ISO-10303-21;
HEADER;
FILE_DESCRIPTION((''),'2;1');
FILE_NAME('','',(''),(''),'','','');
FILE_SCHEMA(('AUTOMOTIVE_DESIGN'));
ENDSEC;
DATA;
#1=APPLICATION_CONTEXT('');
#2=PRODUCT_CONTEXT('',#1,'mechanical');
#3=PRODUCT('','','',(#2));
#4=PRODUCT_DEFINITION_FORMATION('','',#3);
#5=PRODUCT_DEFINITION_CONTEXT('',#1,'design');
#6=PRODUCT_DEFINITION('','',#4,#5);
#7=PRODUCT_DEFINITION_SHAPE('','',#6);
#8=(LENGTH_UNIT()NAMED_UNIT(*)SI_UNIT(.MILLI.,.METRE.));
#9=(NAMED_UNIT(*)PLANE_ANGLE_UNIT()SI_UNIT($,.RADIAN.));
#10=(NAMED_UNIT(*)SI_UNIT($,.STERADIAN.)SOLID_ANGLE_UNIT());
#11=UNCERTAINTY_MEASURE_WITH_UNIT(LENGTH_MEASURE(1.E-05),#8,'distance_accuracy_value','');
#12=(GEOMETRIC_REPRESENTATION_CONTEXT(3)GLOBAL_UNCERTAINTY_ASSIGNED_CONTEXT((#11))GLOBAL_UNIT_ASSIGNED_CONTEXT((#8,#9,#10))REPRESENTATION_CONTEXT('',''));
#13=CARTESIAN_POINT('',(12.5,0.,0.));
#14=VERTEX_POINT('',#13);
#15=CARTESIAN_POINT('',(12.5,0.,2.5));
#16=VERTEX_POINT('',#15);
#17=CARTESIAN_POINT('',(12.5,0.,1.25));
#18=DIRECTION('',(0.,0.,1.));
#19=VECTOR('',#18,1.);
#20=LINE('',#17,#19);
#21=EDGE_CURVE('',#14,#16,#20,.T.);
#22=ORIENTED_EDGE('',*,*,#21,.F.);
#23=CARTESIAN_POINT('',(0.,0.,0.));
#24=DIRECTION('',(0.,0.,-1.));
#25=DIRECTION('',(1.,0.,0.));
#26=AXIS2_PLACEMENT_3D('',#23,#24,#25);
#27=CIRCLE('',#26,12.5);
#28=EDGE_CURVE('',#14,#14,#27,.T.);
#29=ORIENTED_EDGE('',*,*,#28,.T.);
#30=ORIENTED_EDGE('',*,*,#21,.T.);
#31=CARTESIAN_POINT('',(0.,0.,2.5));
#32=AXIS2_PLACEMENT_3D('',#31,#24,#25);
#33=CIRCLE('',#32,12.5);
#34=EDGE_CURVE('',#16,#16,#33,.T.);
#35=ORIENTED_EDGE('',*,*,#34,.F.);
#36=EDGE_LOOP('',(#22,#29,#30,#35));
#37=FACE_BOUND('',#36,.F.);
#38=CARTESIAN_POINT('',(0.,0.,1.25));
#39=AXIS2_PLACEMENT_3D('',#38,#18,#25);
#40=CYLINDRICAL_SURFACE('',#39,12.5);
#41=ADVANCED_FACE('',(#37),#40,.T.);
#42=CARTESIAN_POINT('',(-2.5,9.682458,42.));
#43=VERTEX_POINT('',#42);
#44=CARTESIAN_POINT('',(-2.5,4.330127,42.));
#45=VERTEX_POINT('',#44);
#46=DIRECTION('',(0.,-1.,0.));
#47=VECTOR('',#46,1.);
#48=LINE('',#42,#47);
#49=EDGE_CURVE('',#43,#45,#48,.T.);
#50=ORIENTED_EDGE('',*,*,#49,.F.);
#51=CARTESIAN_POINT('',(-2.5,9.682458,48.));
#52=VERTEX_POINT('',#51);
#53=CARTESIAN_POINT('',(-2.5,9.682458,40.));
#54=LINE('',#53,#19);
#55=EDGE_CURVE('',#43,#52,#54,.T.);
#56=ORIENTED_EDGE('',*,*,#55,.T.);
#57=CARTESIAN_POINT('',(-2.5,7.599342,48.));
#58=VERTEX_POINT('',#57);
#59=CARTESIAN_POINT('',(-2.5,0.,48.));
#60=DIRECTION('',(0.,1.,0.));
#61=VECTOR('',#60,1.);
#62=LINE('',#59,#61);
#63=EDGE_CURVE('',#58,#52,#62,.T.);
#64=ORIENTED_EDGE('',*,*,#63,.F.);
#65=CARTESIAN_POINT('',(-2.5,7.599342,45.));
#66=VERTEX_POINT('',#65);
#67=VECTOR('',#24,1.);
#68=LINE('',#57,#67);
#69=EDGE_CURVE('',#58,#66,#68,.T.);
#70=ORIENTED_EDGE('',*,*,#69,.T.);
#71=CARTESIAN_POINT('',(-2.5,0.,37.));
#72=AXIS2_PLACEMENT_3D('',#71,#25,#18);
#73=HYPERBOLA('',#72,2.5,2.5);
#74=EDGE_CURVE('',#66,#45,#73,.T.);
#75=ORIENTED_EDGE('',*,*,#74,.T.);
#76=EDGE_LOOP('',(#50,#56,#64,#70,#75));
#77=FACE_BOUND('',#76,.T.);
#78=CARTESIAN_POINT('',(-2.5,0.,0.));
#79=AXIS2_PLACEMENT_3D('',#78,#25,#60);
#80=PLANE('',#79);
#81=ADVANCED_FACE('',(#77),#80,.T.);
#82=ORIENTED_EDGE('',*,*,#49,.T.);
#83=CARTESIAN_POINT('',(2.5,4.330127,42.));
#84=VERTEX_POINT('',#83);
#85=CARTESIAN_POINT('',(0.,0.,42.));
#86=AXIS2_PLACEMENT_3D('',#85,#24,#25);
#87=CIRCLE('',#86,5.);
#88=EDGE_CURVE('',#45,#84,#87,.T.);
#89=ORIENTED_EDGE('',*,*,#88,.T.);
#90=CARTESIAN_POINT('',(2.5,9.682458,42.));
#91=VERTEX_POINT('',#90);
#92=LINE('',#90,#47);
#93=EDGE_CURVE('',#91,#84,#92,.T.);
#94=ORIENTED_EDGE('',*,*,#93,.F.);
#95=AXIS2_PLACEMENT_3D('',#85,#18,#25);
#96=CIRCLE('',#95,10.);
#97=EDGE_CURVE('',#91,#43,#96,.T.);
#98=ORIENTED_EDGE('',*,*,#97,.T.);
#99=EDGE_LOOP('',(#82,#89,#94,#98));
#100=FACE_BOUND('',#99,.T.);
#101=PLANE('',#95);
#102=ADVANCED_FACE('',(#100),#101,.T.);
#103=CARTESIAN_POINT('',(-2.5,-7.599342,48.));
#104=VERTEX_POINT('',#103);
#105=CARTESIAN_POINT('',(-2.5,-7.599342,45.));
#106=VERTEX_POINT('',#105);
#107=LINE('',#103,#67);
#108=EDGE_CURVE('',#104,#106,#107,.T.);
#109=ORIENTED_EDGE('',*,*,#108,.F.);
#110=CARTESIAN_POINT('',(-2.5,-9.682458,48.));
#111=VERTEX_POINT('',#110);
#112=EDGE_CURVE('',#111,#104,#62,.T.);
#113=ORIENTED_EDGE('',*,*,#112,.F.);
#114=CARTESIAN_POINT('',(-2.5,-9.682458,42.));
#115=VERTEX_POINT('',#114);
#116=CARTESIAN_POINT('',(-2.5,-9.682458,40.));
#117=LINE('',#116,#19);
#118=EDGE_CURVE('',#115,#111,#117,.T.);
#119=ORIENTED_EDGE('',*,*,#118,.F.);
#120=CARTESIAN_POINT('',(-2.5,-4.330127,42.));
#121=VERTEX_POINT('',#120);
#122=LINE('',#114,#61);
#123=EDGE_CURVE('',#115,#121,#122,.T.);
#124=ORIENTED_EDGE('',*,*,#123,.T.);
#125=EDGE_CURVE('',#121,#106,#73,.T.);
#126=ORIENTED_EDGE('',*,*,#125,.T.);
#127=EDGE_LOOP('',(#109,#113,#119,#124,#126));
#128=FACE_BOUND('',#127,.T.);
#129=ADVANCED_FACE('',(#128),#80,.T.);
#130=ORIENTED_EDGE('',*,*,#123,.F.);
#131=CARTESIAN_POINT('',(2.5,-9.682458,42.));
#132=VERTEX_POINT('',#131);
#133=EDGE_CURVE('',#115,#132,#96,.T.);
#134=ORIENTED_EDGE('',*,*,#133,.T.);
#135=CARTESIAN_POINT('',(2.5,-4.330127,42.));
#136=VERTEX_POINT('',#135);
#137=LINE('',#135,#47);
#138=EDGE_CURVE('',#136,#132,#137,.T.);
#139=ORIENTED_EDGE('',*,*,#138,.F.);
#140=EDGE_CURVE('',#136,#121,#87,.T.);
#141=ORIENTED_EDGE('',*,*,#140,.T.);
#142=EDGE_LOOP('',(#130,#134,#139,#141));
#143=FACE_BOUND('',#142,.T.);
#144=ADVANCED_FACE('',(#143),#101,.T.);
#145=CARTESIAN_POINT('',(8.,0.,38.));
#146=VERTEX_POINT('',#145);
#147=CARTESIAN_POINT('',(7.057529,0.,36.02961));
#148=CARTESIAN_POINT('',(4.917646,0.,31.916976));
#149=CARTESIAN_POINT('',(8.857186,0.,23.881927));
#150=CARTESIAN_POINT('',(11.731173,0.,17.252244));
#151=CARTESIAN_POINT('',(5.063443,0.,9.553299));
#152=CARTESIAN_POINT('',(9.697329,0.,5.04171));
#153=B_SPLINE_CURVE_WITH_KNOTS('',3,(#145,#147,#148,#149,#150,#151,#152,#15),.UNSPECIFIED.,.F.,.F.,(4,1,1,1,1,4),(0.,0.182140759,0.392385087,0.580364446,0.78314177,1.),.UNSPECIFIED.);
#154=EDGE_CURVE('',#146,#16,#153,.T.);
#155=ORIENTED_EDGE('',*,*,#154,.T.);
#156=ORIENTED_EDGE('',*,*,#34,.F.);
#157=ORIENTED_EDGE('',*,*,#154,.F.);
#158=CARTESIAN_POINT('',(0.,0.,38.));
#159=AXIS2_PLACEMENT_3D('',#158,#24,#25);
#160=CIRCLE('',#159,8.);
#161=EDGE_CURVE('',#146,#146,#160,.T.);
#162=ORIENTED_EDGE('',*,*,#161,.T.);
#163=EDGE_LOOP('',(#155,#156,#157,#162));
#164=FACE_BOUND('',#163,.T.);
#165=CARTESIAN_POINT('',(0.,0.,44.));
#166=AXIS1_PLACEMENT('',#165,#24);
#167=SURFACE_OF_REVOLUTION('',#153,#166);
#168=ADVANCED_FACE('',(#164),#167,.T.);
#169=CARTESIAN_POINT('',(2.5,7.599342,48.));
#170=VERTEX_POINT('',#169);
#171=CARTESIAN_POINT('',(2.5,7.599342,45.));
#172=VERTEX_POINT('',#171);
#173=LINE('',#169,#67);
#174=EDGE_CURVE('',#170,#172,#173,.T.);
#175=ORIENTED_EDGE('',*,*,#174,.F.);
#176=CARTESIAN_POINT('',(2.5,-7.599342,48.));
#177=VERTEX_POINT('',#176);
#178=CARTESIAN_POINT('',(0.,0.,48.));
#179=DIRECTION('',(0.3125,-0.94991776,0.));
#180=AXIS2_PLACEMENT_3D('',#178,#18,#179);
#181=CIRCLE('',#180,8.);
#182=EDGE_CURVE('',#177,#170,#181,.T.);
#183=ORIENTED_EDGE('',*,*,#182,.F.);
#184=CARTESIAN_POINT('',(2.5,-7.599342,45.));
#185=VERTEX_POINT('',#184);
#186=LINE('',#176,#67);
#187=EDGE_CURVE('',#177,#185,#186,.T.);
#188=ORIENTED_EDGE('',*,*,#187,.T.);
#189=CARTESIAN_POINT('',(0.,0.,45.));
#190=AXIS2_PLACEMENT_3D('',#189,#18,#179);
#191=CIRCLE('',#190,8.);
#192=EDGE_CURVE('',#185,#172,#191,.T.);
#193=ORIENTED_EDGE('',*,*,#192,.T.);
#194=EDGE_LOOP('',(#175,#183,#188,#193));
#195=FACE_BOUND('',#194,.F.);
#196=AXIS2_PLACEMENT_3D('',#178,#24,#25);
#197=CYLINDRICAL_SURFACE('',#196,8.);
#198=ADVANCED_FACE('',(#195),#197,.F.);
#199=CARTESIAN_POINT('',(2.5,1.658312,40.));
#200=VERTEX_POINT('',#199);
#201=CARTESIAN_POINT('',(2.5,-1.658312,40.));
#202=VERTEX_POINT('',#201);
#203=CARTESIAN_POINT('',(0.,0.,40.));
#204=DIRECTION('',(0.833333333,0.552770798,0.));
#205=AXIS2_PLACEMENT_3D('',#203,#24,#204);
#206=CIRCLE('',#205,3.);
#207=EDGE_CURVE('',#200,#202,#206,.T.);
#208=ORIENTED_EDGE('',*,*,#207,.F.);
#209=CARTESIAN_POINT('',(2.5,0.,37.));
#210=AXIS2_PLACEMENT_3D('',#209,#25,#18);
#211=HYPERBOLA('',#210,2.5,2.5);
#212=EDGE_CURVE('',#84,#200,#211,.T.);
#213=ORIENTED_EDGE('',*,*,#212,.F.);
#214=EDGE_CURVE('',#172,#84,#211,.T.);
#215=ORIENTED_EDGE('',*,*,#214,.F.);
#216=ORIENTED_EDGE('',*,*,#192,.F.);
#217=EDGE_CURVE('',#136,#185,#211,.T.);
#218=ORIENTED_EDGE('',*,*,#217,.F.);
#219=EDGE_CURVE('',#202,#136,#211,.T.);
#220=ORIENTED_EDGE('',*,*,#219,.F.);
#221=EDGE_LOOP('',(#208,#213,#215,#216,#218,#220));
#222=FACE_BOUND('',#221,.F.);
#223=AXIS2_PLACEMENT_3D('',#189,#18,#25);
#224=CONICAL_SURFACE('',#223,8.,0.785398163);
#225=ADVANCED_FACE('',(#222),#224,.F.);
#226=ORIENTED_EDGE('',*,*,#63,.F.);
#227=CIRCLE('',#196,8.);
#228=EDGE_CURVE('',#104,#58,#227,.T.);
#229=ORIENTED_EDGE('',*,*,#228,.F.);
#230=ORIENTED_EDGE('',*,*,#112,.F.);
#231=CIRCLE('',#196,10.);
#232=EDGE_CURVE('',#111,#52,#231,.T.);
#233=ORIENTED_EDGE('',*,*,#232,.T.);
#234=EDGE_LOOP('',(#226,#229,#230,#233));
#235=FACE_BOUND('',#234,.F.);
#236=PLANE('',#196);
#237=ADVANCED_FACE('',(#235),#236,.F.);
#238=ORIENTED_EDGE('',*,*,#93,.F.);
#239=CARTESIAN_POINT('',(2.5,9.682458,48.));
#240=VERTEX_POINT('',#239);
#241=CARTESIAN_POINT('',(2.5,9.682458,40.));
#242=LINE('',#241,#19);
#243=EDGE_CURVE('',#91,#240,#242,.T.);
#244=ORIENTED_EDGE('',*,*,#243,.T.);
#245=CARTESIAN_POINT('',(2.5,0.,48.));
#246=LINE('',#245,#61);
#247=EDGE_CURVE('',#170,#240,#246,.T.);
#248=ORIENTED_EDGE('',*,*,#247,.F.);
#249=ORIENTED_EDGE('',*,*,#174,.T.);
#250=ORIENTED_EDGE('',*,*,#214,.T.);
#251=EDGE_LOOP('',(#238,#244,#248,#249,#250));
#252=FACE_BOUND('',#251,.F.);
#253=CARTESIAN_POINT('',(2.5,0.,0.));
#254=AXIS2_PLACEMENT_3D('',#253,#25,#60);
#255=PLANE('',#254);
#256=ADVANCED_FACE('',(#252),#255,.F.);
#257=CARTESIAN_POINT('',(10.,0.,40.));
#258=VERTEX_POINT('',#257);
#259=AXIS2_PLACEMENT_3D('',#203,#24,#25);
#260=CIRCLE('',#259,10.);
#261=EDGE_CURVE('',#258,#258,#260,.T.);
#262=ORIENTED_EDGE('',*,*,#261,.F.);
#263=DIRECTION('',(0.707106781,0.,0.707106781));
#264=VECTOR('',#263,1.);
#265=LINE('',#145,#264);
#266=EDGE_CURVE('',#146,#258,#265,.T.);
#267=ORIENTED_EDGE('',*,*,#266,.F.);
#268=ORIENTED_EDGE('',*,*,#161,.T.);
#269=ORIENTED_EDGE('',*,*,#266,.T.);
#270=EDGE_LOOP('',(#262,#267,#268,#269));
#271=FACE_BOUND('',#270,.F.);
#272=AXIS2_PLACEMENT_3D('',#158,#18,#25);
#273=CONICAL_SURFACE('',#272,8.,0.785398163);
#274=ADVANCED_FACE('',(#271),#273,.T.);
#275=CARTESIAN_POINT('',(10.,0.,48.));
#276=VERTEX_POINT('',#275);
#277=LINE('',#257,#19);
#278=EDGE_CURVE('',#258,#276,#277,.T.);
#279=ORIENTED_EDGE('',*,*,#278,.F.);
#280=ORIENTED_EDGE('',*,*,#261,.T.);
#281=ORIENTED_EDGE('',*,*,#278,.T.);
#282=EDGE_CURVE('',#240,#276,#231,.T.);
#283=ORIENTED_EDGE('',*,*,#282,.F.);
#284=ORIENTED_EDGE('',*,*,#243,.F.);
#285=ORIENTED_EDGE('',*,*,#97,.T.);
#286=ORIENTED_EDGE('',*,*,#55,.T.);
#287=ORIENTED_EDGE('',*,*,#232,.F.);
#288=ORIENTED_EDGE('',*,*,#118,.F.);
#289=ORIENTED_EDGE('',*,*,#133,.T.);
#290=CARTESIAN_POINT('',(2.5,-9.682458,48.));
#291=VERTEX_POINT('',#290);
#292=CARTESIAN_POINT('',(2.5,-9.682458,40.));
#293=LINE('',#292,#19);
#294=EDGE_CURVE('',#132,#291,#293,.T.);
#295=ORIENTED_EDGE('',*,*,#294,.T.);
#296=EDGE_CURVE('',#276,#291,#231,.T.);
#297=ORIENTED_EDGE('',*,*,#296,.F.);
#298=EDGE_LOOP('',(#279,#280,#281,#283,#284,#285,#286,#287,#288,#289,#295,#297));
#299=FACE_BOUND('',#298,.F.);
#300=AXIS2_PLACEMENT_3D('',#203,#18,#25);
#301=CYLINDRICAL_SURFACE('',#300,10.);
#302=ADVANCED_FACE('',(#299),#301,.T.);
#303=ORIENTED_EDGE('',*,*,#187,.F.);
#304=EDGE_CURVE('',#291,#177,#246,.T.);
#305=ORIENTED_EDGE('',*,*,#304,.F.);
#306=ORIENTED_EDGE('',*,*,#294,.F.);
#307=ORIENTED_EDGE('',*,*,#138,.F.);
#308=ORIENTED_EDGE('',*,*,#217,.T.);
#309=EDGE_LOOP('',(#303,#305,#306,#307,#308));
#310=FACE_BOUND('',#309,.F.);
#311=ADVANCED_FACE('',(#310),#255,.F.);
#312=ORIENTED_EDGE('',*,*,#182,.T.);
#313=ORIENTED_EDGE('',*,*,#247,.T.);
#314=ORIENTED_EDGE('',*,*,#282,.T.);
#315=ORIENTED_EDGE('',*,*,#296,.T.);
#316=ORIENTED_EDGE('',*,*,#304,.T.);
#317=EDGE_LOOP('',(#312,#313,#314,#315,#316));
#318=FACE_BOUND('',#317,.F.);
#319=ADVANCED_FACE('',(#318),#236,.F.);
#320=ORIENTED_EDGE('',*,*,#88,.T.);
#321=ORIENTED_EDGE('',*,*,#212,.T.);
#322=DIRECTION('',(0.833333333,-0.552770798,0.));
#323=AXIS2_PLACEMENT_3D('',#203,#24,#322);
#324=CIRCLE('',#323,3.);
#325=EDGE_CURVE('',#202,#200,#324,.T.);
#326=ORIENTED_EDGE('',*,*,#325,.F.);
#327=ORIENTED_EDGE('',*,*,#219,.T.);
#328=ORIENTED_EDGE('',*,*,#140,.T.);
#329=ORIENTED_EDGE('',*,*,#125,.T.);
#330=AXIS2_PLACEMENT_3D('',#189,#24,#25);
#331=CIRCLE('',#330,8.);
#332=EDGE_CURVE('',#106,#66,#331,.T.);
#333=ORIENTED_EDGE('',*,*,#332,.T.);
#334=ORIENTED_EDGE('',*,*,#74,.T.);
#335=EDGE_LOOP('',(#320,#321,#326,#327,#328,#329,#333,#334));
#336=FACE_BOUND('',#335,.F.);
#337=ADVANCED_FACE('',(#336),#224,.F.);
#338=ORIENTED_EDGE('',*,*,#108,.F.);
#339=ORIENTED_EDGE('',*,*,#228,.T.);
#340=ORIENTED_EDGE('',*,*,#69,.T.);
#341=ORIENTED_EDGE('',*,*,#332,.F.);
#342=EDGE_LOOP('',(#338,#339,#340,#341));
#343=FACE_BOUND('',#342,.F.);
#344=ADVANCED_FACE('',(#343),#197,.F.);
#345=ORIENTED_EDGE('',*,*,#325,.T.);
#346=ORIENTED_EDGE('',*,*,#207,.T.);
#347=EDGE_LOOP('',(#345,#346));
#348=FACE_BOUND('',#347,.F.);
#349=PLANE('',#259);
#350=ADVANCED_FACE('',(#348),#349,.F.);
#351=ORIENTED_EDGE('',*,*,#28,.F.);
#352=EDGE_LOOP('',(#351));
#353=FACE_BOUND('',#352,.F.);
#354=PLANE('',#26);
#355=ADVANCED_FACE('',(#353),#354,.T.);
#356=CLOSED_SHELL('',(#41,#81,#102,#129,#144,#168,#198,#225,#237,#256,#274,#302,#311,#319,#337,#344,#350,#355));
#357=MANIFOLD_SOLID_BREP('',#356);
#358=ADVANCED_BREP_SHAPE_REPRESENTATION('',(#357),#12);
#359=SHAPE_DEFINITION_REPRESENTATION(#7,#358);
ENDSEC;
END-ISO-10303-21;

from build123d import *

# Parameters (mm, degrees)
F0_W     = 12.5
F0_H     = 2.5
F2_W     = 5
F2_H     = 30
F3_DEPTH = 6


# Not quite as in the source:
# - a fillet or chamfer that OpenCascade refuses, or shapes differently, is made with other operations: its cross-section is extruded or revolved along the edge and cut away or added


with BuildPart() as f1:
    # F0 (on Front) → F1 (revolve)
    with BuildSketch(Plane.XZ):
        with BuildLine():
            Line((0, 2.5), (12.5, 2.5))
            add(Edge.make_bspline(
                [(8, 38), (7.0575290046, 36.0296102259), (4.9176459622, 31.9169764445), (8.8571855748, 23.8819266131), (11.7311727266, 17.2522437772), (5.0634432181, 9.5532988579), (9.6973287885, 5.0417102196), (12.5, 2.5)],
                knots=[0, 0, 0, 0, 0.1821407595, 0.3923850866, 0.5803644457, 0.7831417696, 1, 1, 1, 1], degree=3))
            Line((8, 38), (0, 38))
            Line((0, 38), (0, 2.5))
        make_face()
        with Locations((6.25, 1.25)):
            Rectangle(F0_W, F0_H)
        Polygon((10, 40), (10, 48), (8, 48), (8, 40), (0, 40), (0, 38), (8, 38), align=None)
    revolve(axis=Axis((0, 0, 44), (0, 0, -1)))

    # F2 (on face) → F3 (cut)
    with BuildSketch(Plane.XY.offset(48)):
        Rectangle(F2_W, F2_H)
    extrude(amount=-F3_DEPTH, mode=Mode.SUBTRACT)

    # F4: chamfer of 5 on 1 edges, made by hand


with BuildPart() as f4_tool2:
    # F4_s3 → F4_t4 (revolve)
    with BuildSketch(Plane.XZ):
        Polygon((8, 45), (3, 40), (8, 40), align=None)
    revolve(axis=Axis((0, 0, 40), (0, 0, -1)))

    split(bisect_by=Plane.YZ.offset(2.5), keep=Keep.TOP)


with BuildPart() as f1_1:
    add(f1.part)

    # F4_t1: union F4_tool2
    add(f4_tool2.part)


with BuildPart() as f4_tool7:
    # F4_s8 → F4_t9 (revolve)
    with BuildSketch(Plane.XZ):
        Polygon((8, 45), (3, 40), (8, 40), align=None)
    revolve(axis=Axis((0, 0, 40), (0, 0, -1)))

    split(bisect_by=Plane.XY.offset(42), keep=Keep.BOTTOM)


with BuildPart() as f1_2:
    add(f1_1.part)

    # F4_t6: union F4_tool7
    add(f4_tool7.part)


with BuildPart() as f4_tool12:
    # F4_s13 → F4_t14 (revolve)
    with BuildSketch(Plane.XZ):
        Polygon((8, 45), (3, 40), (8, 40), align=None)
    revolve(axis=Axis((0, 0, 40), (0, 0, -1)))

    split(bisect_by=Plane.YZ.offset(-2.5), keep=Keep.BOTTOM)


with BuildPart() as f1_3:
    add(f1_2.part)

    # F4_t11: union F4_tool12
    add(f4_tool12.part)


solid = f1_3.part
